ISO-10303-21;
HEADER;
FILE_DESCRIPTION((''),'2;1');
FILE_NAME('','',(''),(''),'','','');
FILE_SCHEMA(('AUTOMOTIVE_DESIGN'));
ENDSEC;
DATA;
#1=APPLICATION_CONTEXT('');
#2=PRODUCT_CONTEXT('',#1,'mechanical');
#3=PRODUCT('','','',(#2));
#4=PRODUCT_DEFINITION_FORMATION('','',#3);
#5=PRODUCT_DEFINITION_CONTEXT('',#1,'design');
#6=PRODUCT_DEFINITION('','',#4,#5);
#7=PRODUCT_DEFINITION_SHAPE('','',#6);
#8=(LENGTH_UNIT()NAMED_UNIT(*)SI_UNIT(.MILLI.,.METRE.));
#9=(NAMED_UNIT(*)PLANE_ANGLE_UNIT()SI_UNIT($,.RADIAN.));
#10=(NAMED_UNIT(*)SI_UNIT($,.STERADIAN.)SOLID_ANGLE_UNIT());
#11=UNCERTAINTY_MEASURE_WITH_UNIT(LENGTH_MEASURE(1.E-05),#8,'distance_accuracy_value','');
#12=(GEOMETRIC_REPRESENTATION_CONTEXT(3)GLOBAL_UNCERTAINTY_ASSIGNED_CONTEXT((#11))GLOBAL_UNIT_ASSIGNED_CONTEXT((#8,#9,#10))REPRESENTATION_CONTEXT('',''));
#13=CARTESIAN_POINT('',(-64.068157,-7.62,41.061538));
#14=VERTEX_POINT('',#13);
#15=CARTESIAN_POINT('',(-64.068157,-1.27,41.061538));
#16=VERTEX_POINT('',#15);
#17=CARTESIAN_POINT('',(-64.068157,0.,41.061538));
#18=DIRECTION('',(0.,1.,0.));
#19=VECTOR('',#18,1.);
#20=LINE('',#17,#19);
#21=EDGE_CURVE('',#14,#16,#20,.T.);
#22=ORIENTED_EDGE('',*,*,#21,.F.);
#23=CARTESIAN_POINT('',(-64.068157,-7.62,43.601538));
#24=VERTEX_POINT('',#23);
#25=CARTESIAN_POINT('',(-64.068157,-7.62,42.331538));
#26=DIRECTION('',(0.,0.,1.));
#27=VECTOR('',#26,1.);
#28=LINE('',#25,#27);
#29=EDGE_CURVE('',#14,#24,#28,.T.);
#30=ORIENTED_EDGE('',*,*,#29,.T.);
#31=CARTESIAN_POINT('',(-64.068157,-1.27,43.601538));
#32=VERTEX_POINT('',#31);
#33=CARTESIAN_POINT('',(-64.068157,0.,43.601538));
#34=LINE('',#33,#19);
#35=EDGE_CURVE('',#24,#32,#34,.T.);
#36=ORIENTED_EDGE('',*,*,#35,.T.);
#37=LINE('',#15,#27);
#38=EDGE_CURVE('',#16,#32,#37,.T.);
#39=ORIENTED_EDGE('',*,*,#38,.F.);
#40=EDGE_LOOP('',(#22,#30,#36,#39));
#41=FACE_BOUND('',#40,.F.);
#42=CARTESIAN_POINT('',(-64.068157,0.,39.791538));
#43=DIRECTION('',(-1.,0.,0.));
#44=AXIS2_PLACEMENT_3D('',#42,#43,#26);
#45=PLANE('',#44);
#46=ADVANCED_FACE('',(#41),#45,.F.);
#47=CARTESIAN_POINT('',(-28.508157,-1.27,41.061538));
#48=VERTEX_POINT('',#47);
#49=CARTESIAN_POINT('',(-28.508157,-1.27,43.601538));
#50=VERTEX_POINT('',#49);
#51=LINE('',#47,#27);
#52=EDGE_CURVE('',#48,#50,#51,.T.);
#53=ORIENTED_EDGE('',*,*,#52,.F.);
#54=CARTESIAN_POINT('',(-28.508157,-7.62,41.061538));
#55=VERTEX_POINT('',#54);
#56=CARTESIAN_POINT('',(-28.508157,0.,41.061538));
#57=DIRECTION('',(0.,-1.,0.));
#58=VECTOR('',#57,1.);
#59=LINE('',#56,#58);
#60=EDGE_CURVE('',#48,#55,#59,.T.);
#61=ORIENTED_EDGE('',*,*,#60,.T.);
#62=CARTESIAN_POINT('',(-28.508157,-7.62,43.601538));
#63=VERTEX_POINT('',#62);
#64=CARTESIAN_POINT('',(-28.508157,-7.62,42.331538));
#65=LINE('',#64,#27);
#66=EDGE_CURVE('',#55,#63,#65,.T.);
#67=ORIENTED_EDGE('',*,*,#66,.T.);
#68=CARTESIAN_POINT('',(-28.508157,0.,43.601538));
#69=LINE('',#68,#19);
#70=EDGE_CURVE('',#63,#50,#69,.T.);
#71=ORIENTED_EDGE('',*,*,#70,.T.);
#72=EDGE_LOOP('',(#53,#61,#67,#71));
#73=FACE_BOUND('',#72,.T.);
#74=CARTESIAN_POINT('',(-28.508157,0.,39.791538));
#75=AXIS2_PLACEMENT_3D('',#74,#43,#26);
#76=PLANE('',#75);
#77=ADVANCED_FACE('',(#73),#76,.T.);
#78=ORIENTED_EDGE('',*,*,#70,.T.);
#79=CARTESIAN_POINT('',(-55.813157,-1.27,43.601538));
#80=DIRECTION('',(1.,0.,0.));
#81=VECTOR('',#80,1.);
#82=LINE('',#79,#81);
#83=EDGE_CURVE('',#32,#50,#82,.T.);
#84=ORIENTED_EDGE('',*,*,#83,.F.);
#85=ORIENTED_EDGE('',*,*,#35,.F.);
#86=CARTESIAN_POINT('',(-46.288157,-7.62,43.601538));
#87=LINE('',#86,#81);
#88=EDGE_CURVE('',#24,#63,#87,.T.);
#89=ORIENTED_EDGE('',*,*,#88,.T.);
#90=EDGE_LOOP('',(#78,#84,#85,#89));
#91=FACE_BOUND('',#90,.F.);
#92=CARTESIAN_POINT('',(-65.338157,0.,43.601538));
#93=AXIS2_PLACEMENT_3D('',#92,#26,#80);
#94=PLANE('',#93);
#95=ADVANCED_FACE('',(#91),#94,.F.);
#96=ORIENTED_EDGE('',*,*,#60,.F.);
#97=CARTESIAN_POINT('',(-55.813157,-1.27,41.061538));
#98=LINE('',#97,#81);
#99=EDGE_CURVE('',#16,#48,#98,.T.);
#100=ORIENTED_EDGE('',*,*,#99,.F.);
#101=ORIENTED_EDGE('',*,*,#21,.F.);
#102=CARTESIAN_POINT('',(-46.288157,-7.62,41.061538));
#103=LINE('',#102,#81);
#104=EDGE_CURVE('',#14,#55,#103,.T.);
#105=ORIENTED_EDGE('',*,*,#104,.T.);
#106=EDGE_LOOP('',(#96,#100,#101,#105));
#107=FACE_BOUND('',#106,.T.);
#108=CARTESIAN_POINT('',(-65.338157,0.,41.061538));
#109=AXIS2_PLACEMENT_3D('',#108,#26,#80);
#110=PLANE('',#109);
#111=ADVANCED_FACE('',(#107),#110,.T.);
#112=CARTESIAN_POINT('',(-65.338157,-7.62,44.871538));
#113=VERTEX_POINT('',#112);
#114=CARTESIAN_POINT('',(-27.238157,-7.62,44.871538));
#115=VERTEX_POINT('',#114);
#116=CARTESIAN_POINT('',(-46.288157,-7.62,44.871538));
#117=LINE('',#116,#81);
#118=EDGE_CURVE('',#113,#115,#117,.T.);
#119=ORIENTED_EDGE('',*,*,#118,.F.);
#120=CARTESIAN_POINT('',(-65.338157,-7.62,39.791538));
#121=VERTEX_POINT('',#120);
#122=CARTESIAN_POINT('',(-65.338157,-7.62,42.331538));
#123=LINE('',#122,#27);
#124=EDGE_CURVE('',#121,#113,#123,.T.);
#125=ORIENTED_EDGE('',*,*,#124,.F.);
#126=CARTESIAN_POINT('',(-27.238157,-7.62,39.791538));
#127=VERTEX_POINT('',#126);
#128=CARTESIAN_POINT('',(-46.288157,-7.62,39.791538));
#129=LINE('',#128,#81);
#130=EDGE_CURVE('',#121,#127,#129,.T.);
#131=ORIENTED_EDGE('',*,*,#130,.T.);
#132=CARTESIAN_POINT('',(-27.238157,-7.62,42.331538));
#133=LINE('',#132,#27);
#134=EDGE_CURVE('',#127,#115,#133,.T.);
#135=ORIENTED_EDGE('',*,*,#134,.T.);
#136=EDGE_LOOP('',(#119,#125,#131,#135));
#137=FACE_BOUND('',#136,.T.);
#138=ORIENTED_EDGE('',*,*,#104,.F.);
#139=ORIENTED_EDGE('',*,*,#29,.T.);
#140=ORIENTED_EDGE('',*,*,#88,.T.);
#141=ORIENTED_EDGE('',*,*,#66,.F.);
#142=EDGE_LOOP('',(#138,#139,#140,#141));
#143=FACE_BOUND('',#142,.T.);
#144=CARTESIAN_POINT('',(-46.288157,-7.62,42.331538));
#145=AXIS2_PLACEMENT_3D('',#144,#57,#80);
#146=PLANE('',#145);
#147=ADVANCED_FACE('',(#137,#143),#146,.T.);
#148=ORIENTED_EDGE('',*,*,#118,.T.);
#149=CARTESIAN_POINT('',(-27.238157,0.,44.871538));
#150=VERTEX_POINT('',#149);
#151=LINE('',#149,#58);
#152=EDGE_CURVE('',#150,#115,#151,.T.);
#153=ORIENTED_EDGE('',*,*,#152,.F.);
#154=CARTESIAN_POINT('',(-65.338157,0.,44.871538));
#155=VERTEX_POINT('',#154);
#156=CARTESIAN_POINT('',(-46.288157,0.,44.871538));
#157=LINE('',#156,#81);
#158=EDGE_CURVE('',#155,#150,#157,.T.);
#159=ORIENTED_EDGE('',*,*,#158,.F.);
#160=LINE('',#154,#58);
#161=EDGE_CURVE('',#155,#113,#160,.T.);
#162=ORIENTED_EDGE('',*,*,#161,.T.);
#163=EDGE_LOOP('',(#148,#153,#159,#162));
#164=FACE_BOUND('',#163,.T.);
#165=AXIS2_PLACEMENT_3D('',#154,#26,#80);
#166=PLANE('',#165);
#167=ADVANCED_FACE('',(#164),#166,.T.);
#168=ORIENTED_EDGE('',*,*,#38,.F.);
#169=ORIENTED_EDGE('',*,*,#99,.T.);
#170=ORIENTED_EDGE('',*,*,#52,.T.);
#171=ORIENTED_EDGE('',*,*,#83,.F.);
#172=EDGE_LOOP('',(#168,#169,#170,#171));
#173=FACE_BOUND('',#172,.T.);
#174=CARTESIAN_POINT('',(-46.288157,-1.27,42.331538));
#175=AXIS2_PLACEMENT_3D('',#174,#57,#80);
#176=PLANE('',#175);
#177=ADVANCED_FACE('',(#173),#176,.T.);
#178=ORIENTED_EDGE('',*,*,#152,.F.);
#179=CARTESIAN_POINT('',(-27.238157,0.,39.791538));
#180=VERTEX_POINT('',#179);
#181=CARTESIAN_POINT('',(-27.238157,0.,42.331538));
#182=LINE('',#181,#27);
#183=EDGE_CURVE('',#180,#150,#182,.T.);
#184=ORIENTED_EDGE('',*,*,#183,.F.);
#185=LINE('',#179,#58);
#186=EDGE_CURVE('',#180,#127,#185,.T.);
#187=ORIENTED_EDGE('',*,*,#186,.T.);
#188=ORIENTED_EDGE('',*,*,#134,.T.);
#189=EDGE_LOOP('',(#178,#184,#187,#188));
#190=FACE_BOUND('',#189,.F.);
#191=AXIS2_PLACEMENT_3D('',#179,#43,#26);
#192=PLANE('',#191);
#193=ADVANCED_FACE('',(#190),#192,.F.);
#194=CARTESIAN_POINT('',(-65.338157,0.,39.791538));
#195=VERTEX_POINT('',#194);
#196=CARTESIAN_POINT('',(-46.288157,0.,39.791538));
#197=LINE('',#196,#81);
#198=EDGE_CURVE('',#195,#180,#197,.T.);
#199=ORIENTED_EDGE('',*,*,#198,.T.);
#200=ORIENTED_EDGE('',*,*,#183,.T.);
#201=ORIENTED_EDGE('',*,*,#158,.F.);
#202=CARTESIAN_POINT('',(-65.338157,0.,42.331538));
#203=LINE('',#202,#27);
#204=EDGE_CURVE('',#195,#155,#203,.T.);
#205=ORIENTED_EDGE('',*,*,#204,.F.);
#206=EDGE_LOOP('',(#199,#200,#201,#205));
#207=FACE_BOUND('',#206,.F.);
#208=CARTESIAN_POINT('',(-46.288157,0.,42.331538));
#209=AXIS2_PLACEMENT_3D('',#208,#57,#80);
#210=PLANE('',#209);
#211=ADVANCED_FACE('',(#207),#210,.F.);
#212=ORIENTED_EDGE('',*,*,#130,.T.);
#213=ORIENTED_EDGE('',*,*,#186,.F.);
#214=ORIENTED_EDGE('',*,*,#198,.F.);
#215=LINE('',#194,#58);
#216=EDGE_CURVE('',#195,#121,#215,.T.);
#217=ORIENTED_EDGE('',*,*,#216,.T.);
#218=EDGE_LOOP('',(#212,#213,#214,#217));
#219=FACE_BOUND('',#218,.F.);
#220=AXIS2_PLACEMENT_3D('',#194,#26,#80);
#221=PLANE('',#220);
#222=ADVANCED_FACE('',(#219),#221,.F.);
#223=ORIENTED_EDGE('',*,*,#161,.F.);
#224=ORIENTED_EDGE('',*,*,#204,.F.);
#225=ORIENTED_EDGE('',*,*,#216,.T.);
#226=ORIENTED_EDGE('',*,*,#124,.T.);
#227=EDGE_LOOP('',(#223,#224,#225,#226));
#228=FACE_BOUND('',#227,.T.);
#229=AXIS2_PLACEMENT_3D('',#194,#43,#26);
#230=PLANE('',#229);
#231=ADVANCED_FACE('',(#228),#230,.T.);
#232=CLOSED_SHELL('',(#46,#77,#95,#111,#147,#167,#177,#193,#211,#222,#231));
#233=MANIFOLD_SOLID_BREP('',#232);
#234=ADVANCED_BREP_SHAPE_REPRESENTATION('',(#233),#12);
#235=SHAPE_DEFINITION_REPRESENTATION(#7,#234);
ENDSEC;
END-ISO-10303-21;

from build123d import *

# Parameters (mm, degrees)
F0_W     = 38.1
F0_H     = 5.08
F1_DEPTH = 7.62
F3_T     = -1.27


# Not quite as in the source:
# - a feature of the source that left no trace in its solid (it failed there, or was rolled back) is left out


with BuildPart() as f1:
    # F0 (on Front) → F1 (new body)
    with BuildSketch(Plane.XZ):
        with Locations((-46.2881572708, 42.3315375688)):
            Rectangle(F0_W, F0_H)
    extrude(amount=F1_DEPTH)

    # F3
    f3_openings = [f1.faces().sort_by_distance(p)[0] for p in [
        (-46.288157, -7.62, 42.331538),
    ]]
    offset(amount=F3_T, openings=f3_openings)


solid = f1.part
